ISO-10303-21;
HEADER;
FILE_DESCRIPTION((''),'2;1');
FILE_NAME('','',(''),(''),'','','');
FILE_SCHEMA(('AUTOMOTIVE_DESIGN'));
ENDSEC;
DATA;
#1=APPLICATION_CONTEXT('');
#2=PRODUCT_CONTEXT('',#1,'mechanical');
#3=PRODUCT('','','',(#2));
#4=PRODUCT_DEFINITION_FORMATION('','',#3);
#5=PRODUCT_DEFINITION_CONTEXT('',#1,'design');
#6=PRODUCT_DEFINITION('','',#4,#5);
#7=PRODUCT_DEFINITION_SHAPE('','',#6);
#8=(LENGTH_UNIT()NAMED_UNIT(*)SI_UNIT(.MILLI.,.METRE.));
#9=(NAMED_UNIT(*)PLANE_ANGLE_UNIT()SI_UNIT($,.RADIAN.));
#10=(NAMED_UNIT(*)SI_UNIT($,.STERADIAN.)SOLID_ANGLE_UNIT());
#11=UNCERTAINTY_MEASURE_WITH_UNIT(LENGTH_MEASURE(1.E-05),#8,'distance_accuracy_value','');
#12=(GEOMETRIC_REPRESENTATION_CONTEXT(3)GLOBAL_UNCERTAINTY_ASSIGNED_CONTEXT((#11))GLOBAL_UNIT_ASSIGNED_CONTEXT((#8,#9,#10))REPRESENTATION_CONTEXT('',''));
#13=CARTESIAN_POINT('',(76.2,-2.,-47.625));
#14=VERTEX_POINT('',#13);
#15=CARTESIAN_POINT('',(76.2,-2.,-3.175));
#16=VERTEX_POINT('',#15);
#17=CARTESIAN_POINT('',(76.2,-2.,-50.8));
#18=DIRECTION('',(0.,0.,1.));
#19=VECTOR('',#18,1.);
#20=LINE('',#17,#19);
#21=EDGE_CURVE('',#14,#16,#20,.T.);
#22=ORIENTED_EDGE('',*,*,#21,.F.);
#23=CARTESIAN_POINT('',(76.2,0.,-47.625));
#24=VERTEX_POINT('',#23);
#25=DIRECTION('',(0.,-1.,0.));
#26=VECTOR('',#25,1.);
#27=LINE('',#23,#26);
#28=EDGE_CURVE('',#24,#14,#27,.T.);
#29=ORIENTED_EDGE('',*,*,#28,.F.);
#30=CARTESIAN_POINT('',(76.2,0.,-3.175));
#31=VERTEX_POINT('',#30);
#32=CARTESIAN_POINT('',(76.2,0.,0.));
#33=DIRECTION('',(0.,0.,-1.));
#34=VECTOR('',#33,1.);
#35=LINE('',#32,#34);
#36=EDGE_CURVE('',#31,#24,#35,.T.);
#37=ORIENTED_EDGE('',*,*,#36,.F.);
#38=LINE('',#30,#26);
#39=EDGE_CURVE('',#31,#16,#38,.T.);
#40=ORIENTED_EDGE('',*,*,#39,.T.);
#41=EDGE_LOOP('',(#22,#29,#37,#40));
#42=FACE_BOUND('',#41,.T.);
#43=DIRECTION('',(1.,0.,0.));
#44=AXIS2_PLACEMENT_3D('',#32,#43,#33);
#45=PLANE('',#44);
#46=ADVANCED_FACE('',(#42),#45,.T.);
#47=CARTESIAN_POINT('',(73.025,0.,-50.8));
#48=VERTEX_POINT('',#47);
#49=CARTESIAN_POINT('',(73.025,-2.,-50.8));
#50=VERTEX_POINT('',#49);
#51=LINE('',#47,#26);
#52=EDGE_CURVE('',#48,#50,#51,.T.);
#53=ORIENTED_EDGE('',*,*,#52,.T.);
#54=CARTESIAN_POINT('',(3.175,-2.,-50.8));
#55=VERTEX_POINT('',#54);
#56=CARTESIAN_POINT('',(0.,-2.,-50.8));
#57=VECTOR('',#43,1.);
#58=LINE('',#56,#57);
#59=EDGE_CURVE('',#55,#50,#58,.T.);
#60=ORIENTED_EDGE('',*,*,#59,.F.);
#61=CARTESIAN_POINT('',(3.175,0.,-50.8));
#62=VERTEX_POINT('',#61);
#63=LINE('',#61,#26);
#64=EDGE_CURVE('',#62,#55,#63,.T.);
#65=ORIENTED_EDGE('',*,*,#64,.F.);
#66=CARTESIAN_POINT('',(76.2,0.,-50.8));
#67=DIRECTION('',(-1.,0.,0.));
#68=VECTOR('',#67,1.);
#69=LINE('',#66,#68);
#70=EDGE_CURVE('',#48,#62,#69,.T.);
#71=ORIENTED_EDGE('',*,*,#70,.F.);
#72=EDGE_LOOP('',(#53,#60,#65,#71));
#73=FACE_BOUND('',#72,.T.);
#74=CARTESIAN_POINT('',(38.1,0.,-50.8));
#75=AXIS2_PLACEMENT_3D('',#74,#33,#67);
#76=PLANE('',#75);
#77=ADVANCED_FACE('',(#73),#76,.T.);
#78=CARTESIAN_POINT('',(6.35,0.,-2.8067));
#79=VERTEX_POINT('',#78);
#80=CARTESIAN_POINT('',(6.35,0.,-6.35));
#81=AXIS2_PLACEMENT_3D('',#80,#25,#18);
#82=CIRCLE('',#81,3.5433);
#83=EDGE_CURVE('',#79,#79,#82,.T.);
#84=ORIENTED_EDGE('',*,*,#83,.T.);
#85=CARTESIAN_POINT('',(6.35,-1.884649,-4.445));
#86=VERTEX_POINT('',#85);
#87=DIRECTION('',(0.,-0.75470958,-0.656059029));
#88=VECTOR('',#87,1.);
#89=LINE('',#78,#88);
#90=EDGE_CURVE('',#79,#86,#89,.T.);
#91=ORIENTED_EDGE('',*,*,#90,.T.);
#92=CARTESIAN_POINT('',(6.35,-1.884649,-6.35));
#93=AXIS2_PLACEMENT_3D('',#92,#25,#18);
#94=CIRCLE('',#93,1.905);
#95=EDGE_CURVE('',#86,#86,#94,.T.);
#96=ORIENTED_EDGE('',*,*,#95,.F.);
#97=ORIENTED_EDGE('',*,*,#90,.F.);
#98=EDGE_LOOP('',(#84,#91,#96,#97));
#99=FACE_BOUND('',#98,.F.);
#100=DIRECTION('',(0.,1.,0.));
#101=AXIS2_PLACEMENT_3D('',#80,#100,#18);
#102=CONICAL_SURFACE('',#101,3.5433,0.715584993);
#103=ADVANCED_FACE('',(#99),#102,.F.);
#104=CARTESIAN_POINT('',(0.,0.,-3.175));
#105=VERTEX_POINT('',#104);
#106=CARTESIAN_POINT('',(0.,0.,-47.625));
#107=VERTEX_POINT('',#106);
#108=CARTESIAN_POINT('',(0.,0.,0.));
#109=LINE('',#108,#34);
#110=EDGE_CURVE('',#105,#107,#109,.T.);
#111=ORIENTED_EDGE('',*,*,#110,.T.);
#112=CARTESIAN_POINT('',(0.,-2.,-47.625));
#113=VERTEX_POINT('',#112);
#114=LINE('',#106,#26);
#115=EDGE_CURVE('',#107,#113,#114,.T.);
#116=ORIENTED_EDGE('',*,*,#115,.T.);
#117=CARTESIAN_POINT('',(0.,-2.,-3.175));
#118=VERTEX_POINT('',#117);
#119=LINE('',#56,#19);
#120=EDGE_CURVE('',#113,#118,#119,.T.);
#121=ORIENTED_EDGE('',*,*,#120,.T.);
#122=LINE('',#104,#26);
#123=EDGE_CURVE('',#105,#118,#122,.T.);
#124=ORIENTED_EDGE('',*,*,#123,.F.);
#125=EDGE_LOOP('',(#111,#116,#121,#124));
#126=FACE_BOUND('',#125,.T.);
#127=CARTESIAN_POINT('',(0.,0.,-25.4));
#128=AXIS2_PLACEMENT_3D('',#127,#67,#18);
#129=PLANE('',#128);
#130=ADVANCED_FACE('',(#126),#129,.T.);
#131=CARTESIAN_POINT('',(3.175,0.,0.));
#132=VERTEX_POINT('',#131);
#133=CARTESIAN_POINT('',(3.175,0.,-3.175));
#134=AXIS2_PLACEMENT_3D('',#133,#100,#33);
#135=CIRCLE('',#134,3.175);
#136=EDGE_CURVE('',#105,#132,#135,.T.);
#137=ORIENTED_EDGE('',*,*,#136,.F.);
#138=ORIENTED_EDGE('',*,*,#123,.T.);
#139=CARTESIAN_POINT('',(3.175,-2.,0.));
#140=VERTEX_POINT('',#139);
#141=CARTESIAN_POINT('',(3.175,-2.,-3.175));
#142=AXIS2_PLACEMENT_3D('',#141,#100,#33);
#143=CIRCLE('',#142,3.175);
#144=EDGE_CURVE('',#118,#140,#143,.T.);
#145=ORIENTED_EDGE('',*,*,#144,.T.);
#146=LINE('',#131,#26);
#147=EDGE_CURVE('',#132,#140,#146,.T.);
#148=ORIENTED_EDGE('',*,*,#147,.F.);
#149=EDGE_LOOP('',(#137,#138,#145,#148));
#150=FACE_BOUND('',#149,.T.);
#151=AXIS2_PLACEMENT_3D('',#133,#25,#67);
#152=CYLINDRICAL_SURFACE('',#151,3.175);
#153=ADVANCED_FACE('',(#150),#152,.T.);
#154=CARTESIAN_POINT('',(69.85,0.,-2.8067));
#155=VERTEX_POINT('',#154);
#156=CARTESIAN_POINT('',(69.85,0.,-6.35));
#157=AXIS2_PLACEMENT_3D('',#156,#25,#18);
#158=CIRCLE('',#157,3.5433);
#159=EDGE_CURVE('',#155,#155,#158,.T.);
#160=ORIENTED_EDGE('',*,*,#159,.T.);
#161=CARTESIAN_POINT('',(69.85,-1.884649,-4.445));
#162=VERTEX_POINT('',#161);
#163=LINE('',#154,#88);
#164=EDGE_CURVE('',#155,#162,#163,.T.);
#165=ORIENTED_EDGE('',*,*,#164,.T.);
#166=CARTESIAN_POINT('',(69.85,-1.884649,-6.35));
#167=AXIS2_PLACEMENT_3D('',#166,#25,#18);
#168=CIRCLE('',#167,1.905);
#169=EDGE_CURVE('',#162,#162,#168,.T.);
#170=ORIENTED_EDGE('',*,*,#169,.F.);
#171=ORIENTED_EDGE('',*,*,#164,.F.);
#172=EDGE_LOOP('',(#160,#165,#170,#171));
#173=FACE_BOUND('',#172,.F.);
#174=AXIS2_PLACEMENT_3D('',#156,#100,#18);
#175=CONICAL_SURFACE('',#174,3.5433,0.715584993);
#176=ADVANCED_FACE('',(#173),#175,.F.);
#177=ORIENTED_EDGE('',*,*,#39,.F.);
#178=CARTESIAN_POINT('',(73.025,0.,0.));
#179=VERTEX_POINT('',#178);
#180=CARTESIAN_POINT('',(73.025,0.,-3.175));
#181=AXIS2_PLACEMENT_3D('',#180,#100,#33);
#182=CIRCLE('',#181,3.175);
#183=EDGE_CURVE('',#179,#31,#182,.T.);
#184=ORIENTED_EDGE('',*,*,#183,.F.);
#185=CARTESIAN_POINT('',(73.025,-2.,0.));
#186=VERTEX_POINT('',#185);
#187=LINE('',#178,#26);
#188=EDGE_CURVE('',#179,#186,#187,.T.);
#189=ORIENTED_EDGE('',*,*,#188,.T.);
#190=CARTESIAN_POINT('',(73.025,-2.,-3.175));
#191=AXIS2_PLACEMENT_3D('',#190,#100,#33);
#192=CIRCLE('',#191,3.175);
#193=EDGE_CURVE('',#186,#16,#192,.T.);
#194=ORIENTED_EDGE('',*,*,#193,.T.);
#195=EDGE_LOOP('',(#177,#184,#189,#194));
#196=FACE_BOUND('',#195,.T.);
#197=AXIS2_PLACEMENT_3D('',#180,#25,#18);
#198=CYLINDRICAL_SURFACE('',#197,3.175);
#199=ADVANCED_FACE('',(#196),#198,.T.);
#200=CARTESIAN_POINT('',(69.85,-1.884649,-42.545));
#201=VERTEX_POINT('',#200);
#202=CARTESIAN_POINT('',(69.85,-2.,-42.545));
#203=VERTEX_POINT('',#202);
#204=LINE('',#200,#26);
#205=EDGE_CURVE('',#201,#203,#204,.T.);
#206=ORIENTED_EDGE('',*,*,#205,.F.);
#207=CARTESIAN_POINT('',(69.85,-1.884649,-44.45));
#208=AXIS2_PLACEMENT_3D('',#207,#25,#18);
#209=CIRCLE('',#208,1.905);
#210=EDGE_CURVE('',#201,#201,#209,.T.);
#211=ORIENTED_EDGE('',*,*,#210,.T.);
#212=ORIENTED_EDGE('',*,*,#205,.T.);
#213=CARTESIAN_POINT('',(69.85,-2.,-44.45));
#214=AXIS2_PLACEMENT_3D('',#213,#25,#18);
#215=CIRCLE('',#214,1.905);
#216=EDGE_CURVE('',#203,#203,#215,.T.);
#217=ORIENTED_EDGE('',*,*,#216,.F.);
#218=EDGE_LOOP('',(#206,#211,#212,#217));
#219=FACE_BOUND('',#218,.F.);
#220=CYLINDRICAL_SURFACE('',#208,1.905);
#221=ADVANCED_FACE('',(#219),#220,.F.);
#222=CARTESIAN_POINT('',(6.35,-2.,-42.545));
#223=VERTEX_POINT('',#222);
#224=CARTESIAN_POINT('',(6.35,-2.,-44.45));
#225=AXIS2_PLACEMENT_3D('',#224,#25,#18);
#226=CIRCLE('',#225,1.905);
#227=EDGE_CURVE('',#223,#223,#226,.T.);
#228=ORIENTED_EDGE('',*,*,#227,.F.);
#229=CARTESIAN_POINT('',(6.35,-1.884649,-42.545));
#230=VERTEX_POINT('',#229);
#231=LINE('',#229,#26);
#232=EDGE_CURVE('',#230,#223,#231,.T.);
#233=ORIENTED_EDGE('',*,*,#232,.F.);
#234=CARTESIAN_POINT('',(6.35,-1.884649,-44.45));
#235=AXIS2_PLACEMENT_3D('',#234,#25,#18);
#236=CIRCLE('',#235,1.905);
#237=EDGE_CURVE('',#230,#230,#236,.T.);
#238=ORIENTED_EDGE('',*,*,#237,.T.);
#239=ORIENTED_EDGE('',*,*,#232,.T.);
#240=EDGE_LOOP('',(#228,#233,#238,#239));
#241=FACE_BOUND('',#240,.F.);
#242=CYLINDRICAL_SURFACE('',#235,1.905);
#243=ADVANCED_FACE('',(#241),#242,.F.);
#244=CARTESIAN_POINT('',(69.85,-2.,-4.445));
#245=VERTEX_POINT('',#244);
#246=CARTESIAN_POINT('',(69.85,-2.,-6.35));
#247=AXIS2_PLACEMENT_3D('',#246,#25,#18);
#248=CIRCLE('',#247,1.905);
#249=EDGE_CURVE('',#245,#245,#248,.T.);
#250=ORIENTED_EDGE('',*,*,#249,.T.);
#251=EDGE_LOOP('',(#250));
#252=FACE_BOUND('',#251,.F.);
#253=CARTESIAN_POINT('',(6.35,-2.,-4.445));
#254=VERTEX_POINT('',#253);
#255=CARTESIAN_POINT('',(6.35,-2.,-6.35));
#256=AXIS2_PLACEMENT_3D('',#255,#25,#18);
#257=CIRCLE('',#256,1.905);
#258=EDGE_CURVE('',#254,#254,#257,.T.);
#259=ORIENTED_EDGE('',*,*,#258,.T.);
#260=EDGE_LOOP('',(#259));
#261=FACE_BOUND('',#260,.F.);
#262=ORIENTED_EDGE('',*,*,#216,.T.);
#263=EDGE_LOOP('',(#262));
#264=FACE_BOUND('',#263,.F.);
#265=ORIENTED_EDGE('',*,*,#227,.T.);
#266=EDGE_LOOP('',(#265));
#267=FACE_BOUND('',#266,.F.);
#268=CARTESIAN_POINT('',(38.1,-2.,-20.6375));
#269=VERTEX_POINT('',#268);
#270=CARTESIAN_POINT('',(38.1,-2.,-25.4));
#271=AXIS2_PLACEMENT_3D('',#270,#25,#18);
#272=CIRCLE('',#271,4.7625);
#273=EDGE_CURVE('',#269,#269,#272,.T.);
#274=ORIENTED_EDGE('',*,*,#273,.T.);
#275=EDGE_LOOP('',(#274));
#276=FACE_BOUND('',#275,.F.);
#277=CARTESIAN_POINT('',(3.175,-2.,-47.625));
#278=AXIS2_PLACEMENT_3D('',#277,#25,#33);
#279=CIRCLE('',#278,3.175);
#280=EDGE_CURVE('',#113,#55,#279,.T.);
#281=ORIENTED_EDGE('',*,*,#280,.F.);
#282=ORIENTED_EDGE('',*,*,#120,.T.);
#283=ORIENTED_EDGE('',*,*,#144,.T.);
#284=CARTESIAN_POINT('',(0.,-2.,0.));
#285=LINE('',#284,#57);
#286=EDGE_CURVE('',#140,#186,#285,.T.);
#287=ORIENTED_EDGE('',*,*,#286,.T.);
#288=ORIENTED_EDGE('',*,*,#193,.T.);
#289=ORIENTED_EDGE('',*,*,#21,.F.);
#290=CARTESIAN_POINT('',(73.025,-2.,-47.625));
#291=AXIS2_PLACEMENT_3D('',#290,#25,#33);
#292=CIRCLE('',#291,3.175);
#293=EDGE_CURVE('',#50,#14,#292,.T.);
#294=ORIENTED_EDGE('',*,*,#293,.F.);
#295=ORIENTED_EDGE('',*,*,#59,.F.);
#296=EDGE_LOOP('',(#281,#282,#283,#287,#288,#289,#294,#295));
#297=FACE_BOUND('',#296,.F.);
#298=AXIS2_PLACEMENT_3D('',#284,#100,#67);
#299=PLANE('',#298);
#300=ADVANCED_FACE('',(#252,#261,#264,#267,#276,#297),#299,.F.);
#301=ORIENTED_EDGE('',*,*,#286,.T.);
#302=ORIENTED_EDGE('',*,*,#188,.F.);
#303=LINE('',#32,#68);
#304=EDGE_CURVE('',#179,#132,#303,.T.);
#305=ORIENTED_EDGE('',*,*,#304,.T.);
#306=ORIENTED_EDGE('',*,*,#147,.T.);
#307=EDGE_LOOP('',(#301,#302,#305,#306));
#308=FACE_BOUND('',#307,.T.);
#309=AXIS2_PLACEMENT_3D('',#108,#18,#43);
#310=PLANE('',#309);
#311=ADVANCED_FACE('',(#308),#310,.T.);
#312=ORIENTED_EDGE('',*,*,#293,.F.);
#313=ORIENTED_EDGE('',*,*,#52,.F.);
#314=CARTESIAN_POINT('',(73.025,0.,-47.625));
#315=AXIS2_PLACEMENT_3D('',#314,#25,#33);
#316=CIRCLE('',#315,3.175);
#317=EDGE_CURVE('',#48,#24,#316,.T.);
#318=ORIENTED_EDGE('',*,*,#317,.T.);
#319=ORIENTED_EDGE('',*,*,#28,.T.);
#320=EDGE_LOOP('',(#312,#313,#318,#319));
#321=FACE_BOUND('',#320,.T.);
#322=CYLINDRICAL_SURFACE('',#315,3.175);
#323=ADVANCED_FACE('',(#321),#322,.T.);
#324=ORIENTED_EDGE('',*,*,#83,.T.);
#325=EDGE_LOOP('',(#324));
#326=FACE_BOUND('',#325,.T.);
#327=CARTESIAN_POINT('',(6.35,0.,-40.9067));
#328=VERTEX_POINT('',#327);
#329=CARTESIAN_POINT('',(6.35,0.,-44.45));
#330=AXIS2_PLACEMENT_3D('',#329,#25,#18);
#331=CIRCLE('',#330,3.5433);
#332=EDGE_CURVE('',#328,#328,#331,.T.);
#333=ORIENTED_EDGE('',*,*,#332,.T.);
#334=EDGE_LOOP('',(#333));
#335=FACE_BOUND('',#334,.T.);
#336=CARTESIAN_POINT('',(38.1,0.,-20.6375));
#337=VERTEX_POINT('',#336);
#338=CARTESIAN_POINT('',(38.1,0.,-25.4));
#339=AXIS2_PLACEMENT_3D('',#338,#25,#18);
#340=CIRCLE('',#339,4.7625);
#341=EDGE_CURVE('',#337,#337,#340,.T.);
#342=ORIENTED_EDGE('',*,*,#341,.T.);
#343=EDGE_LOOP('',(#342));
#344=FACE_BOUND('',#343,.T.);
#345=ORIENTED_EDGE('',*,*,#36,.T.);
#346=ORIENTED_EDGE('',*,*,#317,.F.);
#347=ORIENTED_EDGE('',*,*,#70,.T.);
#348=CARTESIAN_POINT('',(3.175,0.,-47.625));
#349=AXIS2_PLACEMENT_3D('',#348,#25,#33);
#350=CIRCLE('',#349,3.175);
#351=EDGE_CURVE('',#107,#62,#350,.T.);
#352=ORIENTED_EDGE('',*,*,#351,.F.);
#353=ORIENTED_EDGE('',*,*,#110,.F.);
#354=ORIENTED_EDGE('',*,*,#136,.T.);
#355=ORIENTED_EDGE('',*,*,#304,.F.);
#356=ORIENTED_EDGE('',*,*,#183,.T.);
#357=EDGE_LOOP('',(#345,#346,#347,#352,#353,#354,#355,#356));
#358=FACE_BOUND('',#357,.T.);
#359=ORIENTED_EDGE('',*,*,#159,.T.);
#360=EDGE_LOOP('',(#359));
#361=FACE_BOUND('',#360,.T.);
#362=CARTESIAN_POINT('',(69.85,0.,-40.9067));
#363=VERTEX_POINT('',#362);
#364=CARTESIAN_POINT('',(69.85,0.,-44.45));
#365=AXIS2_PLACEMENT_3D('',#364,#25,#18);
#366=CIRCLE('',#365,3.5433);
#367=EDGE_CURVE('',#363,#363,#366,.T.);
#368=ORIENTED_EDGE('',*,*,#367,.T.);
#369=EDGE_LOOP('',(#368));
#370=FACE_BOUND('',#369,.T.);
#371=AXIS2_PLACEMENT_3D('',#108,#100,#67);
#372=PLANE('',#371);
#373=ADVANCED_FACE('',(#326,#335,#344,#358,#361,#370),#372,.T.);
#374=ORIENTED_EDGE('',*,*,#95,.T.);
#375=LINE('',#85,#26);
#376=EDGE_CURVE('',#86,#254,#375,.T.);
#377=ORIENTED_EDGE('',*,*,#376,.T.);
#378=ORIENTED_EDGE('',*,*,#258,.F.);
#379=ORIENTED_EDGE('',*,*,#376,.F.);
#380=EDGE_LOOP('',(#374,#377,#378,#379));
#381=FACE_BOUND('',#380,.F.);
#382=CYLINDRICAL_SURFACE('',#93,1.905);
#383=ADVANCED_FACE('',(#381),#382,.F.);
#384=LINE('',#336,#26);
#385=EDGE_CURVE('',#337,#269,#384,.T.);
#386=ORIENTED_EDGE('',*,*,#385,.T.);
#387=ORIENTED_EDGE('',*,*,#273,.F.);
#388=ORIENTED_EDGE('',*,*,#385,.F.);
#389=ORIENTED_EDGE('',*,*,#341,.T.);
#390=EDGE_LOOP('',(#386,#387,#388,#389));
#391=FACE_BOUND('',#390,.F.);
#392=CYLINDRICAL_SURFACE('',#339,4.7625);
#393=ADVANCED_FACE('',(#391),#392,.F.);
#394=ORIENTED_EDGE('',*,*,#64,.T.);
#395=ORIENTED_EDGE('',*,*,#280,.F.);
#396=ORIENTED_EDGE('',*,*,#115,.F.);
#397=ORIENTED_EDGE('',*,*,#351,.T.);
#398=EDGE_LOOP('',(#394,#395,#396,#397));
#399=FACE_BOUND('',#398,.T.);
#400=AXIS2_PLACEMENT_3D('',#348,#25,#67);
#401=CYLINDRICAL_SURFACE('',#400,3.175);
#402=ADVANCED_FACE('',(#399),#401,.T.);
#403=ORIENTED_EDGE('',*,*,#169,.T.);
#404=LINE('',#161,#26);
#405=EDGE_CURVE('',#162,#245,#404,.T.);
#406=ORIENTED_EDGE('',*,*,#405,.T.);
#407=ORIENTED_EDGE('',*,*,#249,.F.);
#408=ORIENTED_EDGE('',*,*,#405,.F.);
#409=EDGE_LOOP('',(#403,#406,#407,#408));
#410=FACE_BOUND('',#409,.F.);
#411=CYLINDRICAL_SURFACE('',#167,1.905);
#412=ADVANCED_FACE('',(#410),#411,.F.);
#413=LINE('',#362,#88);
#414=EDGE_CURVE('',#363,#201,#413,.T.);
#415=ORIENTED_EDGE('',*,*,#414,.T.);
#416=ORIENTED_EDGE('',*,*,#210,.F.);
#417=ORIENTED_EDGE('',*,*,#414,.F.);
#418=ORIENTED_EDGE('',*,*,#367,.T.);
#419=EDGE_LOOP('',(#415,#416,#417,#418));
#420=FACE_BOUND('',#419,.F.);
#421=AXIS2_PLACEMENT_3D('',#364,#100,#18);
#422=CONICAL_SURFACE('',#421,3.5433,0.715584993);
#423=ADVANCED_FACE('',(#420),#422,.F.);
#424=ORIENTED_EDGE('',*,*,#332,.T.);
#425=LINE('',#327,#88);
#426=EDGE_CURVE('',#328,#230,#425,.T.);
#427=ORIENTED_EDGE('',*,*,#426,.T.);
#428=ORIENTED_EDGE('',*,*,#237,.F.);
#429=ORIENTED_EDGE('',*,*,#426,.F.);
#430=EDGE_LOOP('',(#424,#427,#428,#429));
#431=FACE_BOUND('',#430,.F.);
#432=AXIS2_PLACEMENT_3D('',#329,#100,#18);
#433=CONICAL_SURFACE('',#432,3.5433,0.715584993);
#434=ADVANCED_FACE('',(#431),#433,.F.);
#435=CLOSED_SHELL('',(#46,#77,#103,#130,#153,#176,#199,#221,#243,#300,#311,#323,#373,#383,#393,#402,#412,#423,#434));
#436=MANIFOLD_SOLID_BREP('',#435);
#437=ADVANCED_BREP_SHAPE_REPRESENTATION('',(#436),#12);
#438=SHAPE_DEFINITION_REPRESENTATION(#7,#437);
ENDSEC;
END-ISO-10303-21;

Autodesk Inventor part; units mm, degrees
ref_plane "YZ Plane" through (0, 0, 0) normal (1, 0, 0) x (0, 1, 0)
ref_plane "XZ Plane" through (0, 0, 0) normal (0, 1, 0) x (-1, 0, 0)
ref_plane "XY Plane" through (0, 0, 0) normal (0, 0, 1) x (1, 0, 0)
sketch "Profile" plane through (0, 0, 0) normal (0, 1, 0) x (-1, 0, 0)
  line L0 (0, 0) -> (-76.2, 0)
  line L1 (-76.2, 0) -> (-76.2, -50.8)
  line L2 (-76.2, -50.8) -> (0, -50.8)
  line L3 (0, -50.8) -> (0, 0)
  line L4 (0, -25.4) -> (-76.2, -25.4)
  line L5 (-38.1, -50.8) -> (-38.1, 0)
  line L6 (-6.35, -44.45) -> (-69.85, -44.45) construction
  line L7 (-69.85, -44.45) -> (-69.85, -6.35) construction
  line L8 (-69.85, -6.35) -> (-6.35, -6.35) construction
  line L9 (-6.35, -6.35) -> (-6.35, -44.45) construction
  line L10 (-6.35, -44.45) -> (-69.85, -6.35) construction
  line L11 (-69.85, -44.45) -> (-6.35, -6.35) construction
  circle A0 centre (-38.1, -25.4) radius 4.5
  dimension "d0" = 76.2
  dimension "d1" = 50.8
  dimension "d2" = 63.5
  dimension "d3" = 38.1
  dimension "d13" = 9
extrude "Plate1" add sketch "Profile" against normal blind 2
hole "#6 Mounting Hole" at (6.35, 0, -44.45) direction (0, -1, 0) diameter 3.81 end through all countersink diameter 7.0866 countersink angle 82 clearance for "Flat Head Machine Screw (82)" size "#6" standard "Ansi Unified Screw Threads"
pattern_sketch "Jack Plate Mounting Holes" of "#6 Mounting Hole" from (6.35, 0, -44.45) copies at (69.85, 0, -44.45) at (69.85, 0, -6.35) at (6.35, 0, -6.35)
hole "Input Jack Hole" at (38.1, 0, -25.4) direction (0, -1, 0) diameter 9.525 end through all
fillet "Corner Round1" radius 3.175 4 edges at (0, -1, -50.8) (76.2, -1, -50.8) (76.2, -1, 0) (0, -1, 0)
equation "\"d11\" = Thickness"
equation "\"d5\" = Thickness"
equation "\"BendRadius\" = Thickness"
equation "\"BendReliefWidth\" = Thickness"
equation "\"BendReliefDepth\" = 0.5 * Thickness"
equation "\"CornerReliefSize\" = 4 * Thickness"
equation "\"MinimumRemnant\" = 2 * Thickness"
equation "\"TransitionRadius\" = BendRadius"
equation "\"JacobiRadiusSize\" = BendRadius"
equation "\"GapSize\" = Thickness"
equation "\"Thickness\" = 2"
properties part number "Jack Plate" material "Aluminum 6061"
